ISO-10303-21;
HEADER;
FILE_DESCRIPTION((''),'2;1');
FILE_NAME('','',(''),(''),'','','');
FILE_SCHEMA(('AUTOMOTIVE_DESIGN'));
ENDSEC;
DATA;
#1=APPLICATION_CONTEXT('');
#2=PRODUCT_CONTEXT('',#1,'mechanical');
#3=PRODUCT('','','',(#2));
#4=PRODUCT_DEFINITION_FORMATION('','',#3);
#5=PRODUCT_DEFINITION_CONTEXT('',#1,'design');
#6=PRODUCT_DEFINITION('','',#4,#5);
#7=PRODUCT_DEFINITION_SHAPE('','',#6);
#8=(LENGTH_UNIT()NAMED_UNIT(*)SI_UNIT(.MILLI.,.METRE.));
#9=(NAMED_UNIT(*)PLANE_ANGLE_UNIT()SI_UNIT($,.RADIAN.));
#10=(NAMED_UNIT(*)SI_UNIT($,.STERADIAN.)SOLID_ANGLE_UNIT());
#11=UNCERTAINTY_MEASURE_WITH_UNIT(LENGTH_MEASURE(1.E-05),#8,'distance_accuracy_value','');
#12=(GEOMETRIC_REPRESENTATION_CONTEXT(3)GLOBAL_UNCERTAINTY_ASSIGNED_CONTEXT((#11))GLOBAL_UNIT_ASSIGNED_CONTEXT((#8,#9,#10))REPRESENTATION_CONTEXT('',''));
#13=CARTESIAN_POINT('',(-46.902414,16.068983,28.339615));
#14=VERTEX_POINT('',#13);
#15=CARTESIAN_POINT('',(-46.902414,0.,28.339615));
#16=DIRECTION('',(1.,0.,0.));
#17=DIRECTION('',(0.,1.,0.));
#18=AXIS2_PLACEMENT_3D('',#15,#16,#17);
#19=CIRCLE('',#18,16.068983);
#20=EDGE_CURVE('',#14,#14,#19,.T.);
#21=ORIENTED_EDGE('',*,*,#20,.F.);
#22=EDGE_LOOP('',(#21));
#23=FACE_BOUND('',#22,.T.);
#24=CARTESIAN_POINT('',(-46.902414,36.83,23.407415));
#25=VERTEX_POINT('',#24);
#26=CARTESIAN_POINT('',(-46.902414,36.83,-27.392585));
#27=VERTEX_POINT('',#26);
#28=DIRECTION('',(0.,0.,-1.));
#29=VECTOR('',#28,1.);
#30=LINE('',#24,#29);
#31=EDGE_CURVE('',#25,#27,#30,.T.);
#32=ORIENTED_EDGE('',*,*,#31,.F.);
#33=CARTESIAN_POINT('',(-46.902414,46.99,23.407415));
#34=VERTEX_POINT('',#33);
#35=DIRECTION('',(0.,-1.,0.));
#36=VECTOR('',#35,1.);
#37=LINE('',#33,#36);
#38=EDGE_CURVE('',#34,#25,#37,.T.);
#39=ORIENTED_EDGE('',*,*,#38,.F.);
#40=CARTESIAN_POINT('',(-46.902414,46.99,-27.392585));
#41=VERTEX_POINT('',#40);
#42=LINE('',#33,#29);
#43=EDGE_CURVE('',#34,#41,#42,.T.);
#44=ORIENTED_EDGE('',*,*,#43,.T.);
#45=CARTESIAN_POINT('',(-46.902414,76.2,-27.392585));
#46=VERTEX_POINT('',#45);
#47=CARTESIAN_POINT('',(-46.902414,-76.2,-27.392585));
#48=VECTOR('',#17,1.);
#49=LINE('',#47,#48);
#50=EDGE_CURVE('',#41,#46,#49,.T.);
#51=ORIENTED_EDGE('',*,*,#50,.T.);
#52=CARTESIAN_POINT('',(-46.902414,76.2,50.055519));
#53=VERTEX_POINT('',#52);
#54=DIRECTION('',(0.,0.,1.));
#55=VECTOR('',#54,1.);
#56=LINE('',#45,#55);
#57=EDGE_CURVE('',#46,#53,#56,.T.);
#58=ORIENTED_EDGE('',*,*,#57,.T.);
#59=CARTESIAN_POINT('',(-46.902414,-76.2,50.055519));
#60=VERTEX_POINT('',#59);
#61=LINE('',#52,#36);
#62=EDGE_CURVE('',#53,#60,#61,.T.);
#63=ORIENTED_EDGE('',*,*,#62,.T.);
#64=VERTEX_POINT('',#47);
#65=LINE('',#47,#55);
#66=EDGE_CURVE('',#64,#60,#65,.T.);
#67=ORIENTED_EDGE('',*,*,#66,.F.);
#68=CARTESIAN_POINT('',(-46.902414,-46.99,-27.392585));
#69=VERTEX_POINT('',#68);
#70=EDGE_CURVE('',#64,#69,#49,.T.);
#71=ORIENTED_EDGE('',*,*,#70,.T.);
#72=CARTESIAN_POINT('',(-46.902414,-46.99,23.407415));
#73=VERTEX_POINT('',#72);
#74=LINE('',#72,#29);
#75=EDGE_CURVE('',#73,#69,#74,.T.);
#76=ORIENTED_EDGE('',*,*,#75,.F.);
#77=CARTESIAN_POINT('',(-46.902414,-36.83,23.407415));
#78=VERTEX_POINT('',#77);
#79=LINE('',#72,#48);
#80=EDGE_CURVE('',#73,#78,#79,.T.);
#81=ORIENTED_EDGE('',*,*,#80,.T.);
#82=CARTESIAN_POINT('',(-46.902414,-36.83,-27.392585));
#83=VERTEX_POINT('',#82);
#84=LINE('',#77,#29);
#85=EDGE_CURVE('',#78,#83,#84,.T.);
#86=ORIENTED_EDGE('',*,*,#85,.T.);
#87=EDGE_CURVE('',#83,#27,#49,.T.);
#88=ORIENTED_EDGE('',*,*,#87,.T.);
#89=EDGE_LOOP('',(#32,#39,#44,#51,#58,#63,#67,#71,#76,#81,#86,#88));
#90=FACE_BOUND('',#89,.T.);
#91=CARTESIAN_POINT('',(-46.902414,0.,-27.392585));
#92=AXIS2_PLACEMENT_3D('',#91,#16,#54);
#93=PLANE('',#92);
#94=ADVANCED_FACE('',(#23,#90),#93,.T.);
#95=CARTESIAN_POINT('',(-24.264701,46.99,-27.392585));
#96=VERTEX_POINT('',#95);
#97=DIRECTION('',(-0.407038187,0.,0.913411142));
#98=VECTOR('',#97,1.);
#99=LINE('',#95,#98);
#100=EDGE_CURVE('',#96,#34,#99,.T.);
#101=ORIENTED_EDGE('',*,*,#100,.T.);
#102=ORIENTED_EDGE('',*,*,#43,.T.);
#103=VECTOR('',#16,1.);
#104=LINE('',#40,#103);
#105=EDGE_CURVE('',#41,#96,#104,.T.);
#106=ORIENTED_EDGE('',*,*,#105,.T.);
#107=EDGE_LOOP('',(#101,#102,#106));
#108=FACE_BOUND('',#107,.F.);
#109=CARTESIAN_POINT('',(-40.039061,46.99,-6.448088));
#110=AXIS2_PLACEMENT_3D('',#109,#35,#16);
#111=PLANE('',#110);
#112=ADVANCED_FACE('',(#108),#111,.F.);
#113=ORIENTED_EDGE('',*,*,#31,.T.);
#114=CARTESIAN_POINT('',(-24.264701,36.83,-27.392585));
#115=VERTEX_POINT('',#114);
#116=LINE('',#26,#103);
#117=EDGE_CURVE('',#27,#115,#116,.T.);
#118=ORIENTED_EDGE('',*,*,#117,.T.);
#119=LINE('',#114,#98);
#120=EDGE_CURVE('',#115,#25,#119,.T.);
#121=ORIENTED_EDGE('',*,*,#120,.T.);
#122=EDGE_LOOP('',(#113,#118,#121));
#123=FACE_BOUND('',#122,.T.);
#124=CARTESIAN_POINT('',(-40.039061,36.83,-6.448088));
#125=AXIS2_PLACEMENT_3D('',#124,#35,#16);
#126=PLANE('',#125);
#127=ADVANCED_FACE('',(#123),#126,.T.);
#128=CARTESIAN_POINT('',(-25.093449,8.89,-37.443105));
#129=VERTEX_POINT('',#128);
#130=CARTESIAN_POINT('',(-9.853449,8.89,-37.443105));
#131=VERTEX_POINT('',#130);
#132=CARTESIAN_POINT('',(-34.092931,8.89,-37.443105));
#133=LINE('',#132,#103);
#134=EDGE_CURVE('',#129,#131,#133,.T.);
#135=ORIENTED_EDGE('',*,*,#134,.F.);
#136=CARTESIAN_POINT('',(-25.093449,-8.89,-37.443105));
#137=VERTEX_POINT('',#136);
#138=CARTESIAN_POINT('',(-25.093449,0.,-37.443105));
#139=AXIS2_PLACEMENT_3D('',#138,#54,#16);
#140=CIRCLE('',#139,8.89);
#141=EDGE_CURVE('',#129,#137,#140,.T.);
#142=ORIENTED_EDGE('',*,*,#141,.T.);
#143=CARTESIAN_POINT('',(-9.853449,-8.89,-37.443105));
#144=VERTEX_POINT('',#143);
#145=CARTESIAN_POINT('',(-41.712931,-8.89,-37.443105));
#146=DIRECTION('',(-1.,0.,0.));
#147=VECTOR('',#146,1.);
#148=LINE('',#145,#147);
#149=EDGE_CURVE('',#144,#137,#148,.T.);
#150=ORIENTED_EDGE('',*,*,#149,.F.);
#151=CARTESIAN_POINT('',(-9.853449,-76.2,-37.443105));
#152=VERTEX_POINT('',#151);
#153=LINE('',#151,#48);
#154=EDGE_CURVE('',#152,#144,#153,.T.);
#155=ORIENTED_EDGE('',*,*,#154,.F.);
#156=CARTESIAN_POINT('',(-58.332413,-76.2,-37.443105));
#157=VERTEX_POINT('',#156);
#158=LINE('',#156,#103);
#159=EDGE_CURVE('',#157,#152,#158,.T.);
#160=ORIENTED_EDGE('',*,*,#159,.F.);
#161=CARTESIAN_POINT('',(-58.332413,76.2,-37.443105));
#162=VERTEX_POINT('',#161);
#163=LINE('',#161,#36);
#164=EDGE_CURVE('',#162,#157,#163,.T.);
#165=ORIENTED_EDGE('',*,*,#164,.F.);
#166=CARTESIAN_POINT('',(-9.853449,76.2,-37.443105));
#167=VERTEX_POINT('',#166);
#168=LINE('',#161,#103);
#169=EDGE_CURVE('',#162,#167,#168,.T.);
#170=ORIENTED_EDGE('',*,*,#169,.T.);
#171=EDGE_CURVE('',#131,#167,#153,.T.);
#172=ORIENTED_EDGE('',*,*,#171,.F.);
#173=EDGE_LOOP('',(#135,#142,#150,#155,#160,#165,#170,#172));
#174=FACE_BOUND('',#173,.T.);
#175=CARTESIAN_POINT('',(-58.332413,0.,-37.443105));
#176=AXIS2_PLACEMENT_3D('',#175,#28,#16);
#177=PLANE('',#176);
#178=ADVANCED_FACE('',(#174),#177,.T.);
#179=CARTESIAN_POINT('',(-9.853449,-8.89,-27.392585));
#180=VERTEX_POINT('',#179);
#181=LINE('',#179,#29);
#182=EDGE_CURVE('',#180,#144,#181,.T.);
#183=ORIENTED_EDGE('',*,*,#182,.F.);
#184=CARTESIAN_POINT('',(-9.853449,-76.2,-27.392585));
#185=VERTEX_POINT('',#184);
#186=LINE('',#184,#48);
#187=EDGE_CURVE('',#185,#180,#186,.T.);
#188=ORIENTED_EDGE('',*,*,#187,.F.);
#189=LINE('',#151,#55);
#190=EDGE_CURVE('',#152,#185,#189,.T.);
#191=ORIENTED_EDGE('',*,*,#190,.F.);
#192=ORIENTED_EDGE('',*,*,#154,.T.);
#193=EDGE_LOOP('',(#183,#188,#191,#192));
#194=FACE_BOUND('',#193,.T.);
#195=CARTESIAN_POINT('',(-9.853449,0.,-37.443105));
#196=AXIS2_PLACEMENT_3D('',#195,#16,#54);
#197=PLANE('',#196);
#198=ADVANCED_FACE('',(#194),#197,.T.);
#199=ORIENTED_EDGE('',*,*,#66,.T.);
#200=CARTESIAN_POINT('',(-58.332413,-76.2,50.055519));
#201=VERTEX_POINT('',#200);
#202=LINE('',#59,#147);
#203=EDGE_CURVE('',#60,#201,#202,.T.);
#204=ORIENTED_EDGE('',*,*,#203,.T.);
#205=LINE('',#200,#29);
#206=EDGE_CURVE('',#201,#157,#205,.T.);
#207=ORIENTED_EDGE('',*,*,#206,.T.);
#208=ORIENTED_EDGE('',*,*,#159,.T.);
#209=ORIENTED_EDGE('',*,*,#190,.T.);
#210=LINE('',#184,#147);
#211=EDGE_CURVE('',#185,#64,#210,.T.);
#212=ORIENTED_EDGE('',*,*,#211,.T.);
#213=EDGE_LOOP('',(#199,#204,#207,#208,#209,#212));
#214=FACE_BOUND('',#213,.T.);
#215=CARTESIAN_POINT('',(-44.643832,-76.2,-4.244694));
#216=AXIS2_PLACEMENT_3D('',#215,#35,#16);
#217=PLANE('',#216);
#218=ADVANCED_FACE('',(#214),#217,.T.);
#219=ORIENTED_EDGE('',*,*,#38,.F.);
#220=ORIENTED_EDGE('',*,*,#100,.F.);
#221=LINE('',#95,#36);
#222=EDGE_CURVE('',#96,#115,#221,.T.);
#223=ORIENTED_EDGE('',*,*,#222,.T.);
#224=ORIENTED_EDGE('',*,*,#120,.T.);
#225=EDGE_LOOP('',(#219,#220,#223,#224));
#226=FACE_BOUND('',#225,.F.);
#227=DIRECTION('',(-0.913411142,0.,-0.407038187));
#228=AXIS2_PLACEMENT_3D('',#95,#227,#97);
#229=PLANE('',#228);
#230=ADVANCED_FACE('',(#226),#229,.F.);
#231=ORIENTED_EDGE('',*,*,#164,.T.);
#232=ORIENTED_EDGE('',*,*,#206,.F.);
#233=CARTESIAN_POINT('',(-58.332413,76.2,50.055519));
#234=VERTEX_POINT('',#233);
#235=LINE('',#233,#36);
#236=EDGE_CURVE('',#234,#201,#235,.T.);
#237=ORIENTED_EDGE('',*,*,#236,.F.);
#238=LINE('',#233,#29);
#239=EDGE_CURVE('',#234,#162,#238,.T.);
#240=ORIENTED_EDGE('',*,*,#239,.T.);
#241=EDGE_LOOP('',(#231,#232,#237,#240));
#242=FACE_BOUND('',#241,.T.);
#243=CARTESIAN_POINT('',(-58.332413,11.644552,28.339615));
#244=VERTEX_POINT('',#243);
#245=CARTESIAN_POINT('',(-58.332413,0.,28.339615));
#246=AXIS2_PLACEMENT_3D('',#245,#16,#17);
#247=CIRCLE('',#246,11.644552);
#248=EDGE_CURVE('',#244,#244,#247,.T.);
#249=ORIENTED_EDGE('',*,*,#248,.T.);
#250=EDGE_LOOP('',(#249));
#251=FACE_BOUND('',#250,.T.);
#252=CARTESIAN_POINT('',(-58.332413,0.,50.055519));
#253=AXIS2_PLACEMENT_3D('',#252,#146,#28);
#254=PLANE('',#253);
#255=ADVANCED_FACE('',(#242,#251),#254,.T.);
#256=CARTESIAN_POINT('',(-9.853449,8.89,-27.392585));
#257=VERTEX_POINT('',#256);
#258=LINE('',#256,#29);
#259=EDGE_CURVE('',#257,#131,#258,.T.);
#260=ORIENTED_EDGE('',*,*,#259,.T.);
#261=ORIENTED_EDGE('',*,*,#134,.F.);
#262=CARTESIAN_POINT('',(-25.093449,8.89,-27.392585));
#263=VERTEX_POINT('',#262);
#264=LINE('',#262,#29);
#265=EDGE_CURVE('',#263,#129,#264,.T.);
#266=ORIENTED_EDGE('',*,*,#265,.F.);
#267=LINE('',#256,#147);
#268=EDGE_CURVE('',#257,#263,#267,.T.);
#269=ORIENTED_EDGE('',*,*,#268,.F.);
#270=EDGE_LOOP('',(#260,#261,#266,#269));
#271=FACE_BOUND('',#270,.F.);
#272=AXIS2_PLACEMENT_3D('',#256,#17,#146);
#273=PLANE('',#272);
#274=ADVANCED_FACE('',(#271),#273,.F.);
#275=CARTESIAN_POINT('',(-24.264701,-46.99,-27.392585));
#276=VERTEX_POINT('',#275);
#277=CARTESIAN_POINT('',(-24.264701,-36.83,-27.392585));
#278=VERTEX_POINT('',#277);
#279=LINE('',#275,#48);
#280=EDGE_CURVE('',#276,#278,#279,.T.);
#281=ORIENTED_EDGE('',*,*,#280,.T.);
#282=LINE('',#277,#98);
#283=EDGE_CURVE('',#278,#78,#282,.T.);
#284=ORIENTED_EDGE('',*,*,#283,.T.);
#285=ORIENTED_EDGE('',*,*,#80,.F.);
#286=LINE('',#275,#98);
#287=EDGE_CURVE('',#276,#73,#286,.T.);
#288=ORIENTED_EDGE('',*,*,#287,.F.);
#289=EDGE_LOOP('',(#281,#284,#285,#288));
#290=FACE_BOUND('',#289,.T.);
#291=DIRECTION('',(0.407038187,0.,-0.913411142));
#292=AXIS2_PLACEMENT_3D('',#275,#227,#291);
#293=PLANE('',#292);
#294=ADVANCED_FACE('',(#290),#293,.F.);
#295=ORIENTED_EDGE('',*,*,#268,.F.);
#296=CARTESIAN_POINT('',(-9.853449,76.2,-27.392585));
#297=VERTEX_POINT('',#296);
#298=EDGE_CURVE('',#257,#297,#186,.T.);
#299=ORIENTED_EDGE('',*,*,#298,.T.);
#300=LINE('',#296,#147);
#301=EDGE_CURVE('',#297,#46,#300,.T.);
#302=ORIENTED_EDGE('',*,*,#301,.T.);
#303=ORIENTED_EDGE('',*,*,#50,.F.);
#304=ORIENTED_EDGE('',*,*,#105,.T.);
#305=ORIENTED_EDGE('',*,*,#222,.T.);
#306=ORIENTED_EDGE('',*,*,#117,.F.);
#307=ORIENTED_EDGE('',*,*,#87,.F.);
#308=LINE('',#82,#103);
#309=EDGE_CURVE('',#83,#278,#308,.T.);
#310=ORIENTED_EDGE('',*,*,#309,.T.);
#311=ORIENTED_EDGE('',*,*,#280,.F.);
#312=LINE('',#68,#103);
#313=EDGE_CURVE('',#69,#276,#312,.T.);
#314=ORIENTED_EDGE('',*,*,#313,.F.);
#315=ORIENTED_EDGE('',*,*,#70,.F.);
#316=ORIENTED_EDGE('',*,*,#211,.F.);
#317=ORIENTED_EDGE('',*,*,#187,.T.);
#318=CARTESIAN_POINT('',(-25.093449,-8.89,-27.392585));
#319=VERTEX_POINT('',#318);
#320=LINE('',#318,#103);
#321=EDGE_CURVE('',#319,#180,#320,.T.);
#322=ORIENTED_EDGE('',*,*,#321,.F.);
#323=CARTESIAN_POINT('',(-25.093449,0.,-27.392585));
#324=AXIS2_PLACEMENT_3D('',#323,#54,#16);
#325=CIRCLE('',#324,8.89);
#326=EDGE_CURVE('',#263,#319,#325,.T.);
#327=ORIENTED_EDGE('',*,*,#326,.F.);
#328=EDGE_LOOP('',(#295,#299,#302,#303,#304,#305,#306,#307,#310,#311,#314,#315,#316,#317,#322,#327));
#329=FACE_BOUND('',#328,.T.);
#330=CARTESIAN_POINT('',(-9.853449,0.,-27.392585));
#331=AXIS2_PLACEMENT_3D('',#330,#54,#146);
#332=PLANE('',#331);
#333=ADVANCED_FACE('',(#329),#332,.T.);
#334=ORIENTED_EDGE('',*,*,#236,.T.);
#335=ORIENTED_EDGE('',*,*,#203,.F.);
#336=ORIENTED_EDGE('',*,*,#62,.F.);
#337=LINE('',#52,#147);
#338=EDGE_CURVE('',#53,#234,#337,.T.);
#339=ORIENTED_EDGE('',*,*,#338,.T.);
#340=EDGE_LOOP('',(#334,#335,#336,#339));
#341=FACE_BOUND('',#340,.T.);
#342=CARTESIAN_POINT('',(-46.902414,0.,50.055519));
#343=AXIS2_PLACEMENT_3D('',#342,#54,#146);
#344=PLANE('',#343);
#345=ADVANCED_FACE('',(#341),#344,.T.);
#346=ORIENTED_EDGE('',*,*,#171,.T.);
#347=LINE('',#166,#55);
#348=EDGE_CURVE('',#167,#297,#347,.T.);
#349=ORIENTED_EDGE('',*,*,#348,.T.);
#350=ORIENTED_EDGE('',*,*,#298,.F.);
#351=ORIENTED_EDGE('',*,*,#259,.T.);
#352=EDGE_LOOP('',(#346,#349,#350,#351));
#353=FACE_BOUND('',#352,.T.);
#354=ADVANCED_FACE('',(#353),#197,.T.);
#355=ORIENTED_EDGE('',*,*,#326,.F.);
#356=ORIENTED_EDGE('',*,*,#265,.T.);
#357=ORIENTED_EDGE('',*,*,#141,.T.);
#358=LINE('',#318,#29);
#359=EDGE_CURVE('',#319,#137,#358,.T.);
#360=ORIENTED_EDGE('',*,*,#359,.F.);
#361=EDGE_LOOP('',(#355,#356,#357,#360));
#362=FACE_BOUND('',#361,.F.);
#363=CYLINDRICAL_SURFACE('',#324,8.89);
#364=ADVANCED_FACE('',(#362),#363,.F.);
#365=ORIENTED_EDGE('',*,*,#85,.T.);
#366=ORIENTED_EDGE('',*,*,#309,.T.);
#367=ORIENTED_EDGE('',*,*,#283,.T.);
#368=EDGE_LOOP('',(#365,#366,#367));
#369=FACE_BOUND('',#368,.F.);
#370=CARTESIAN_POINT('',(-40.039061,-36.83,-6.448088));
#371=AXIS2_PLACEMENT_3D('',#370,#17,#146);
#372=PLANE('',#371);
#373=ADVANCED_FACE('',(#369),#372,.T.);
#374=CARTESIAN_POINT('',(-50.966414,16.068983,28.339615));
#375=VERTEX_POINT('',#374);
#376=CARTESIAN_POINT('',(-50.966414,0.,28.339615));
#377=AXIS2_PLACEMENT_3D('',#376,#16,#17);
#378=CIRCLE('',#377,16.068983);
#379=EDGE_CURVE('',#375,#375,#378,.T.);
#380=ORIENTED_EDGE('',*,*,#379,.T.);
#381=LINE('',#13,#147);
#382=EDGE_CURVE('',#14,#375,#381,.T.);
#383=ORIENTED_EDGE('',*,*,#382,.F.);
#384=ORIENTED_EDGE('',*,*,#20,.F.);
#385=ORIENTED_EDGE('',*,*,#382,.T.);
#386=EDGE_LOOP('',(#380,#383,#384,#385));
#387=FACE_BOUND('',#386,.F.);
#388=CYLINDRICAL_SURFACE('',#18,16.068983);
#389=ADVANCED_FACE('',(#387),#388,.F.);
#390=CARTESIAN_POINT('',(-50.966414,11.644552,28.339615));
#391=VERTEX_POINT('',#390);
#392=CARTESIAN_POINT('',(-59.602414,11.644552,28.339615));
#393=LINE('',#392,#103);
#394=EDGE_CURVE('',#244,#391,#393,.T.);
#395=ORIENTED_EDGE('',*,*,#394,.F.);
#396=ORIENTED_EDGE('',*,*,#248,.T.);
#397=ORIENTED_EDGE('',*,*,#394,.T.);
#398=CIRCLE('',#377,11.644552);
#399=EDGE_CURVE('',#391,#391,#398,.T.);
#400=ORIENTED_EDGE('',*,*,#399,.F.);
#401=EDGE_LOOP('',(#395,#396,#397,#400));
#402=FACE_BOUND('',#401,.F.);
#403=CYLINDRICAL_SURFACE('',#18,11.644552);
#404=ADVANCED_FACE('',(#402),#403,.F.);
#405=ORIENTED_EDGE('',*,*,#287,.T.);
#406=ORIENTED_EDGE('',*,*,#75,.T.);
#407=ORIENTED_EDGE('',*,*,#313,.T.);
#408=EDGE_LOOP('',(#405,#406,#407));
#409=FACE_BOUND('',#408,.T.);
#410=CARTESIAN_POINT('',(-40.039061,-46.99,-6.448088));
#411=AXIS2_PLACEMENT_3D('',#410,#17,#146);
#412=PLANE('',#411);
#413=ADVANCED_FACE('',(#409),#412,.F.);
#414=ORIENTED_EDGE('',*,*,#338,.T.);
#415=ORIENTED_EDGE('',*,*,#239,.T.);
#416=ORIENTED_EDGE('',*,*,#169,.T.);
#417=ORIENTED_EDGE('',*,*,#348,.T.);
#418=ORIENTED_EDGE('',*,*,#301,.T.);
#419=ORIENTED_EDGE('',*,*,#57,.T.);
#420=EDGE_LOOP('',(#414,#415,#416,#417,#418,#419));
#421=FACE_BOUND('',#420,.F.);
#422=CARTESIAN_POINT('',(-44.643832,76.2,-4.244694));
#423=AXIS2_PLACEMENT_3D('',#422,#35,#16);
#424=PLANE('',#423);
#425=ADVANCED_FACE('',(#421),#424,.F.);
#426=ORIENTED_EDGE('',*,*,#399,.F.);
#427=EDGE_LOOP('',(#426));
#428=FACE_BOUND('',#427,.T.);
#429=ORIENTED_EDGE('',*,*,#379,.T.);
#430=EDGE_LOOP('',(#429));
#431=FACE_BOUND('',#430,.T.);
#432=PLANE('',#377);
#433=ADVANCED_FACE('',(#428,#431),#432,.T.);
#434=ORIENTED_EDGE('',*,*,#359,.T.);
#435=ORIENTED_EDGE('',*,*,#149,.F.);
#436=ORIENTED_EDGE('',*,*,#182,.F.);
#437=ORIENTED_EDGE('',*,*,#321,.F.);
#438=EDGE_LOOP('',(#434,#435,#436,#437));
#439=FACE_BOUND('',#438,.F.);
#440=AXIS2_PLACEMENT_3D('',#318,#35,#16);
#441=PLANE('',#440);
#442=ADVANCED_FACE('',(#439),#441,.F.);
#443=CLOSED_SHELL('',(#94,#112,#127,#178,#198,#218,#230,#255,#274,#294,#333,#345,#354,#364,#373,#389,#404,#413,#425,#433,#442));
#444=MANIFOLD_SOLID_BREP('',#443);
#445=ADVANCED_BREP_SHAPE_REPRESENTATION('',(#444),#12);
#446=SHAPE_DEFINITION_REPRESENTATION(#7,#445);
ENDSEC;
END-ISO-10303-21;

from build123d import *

# Parameters (mm, degrees)
F1_DEPTH  = 76.2
F2_R      = 11.6445519737
F3_DEPTH  = 12.7
F4_R      = 16.0689830222
F4_R_2    = 11.6445519737
F5_DEPTH  = 4.064
F7_DEPTH  = 10.0515203009
F10_DEPTH = 10.16


# Not quite as in the source:
# - a pattern or mirror of a feature is missing from the dataset's text; its kind, count and spacing are read off the source's solid


with BuildPart() as f1:
    # F0 (on Front) → F1 (new body, symmetric)
    with BuildSketch(Plane.XZ):
        Polygon((-46.9024144113, -27.3925848305), (-46.9024144113, 50.0555187464), (-58.332413435, 50.0555187464), (-58.332413435, -37.4431051314), (-9.8534487188, -37.4431051314), (-9.8534487188, -27.3925848305), align=None)
    extrude(amount=F1_DEPTH, both=True)

    # F2 (on face) → F3 (cut, symmetric)
    with BuildSketch(Plane.YZ.offset(-46.9024144113)):
        with Locations((0, 28.3396150917)):
            Circle(F2_R)
    extrude(amount=F3_DEPTH, both=True, mode=Mode.SUBTRACT)

    # F4 (on face) → F5 (cut)
    with BuildSketch(Plane.YZ.offset(-46.9024144113)):
        with Locations((0, 28.3396150917)):
            Circle(F4_R)
        with Locations((0, 28.3396150917)):
            Circle(F4_R_2, mode=Mode.SUBTRACT)
    extrude(amount=-F5_DEPTH, mode=Mode.SUBTRACT)

    # F6 (on face) → F7 (cut, through all)
    with BuildSketch(Plane.XY.offset(-27.3925848305)):
        with BuildLine():
            ThreePointArc((-25.0934487188, -8.89), (-18.807269434, -6.2861792847), (-16.2034487188, 0))
            ThreePointArc((-16.2034487188, 0), (-18.807269434, 6.2861792847), (-25.0934487188, 8.89))
            ThreePointArc((-25.0934487188, 8.89), (-33.9834487188, 0), (-25.0934487188, -8.89))
        make_face()
        with BuildLine():
            ThreePointArc((-25.0934487188, 8.89), (-18.807269434, 6.2861792847), (-16.2034487188, 0))
            ThreePointArc((-16.2034487188, 0), (-18.807269434, -6.2861792847), (-25.0934487188, -8.89))
            Line((-25.0934487188, -8.89), (-9.8534487188, -8.89))
            Line((-9.8534487188, -8.89), (-9.8534487188, 8.89))
            Line((-9.8534487188, 8.89), (-25.0934487188, 8.89))
        make_face()
    extrude(amount=-F7_DEPTH, mode=Mode.SUBTRACT)

    # F9 (on offset) → F10 (join)
    with BuildSketch(Plane.XZ.offset(-46.99)):
        Polygon((-24.2647007108, -27.3925848305), (-46.9024144113, 23.4074151695), (-46.9024144113, -27.3925848305), align=None)
    f10 = extrude(amount=F10_DEPTH)

    # F10_copies: F10 across plane
    add(f10.mirror(Plane(origin=(0, 0, 0), x_dir=(0, 0, -1), z_dir=(0, -1, 0))))


solid = f1.part
